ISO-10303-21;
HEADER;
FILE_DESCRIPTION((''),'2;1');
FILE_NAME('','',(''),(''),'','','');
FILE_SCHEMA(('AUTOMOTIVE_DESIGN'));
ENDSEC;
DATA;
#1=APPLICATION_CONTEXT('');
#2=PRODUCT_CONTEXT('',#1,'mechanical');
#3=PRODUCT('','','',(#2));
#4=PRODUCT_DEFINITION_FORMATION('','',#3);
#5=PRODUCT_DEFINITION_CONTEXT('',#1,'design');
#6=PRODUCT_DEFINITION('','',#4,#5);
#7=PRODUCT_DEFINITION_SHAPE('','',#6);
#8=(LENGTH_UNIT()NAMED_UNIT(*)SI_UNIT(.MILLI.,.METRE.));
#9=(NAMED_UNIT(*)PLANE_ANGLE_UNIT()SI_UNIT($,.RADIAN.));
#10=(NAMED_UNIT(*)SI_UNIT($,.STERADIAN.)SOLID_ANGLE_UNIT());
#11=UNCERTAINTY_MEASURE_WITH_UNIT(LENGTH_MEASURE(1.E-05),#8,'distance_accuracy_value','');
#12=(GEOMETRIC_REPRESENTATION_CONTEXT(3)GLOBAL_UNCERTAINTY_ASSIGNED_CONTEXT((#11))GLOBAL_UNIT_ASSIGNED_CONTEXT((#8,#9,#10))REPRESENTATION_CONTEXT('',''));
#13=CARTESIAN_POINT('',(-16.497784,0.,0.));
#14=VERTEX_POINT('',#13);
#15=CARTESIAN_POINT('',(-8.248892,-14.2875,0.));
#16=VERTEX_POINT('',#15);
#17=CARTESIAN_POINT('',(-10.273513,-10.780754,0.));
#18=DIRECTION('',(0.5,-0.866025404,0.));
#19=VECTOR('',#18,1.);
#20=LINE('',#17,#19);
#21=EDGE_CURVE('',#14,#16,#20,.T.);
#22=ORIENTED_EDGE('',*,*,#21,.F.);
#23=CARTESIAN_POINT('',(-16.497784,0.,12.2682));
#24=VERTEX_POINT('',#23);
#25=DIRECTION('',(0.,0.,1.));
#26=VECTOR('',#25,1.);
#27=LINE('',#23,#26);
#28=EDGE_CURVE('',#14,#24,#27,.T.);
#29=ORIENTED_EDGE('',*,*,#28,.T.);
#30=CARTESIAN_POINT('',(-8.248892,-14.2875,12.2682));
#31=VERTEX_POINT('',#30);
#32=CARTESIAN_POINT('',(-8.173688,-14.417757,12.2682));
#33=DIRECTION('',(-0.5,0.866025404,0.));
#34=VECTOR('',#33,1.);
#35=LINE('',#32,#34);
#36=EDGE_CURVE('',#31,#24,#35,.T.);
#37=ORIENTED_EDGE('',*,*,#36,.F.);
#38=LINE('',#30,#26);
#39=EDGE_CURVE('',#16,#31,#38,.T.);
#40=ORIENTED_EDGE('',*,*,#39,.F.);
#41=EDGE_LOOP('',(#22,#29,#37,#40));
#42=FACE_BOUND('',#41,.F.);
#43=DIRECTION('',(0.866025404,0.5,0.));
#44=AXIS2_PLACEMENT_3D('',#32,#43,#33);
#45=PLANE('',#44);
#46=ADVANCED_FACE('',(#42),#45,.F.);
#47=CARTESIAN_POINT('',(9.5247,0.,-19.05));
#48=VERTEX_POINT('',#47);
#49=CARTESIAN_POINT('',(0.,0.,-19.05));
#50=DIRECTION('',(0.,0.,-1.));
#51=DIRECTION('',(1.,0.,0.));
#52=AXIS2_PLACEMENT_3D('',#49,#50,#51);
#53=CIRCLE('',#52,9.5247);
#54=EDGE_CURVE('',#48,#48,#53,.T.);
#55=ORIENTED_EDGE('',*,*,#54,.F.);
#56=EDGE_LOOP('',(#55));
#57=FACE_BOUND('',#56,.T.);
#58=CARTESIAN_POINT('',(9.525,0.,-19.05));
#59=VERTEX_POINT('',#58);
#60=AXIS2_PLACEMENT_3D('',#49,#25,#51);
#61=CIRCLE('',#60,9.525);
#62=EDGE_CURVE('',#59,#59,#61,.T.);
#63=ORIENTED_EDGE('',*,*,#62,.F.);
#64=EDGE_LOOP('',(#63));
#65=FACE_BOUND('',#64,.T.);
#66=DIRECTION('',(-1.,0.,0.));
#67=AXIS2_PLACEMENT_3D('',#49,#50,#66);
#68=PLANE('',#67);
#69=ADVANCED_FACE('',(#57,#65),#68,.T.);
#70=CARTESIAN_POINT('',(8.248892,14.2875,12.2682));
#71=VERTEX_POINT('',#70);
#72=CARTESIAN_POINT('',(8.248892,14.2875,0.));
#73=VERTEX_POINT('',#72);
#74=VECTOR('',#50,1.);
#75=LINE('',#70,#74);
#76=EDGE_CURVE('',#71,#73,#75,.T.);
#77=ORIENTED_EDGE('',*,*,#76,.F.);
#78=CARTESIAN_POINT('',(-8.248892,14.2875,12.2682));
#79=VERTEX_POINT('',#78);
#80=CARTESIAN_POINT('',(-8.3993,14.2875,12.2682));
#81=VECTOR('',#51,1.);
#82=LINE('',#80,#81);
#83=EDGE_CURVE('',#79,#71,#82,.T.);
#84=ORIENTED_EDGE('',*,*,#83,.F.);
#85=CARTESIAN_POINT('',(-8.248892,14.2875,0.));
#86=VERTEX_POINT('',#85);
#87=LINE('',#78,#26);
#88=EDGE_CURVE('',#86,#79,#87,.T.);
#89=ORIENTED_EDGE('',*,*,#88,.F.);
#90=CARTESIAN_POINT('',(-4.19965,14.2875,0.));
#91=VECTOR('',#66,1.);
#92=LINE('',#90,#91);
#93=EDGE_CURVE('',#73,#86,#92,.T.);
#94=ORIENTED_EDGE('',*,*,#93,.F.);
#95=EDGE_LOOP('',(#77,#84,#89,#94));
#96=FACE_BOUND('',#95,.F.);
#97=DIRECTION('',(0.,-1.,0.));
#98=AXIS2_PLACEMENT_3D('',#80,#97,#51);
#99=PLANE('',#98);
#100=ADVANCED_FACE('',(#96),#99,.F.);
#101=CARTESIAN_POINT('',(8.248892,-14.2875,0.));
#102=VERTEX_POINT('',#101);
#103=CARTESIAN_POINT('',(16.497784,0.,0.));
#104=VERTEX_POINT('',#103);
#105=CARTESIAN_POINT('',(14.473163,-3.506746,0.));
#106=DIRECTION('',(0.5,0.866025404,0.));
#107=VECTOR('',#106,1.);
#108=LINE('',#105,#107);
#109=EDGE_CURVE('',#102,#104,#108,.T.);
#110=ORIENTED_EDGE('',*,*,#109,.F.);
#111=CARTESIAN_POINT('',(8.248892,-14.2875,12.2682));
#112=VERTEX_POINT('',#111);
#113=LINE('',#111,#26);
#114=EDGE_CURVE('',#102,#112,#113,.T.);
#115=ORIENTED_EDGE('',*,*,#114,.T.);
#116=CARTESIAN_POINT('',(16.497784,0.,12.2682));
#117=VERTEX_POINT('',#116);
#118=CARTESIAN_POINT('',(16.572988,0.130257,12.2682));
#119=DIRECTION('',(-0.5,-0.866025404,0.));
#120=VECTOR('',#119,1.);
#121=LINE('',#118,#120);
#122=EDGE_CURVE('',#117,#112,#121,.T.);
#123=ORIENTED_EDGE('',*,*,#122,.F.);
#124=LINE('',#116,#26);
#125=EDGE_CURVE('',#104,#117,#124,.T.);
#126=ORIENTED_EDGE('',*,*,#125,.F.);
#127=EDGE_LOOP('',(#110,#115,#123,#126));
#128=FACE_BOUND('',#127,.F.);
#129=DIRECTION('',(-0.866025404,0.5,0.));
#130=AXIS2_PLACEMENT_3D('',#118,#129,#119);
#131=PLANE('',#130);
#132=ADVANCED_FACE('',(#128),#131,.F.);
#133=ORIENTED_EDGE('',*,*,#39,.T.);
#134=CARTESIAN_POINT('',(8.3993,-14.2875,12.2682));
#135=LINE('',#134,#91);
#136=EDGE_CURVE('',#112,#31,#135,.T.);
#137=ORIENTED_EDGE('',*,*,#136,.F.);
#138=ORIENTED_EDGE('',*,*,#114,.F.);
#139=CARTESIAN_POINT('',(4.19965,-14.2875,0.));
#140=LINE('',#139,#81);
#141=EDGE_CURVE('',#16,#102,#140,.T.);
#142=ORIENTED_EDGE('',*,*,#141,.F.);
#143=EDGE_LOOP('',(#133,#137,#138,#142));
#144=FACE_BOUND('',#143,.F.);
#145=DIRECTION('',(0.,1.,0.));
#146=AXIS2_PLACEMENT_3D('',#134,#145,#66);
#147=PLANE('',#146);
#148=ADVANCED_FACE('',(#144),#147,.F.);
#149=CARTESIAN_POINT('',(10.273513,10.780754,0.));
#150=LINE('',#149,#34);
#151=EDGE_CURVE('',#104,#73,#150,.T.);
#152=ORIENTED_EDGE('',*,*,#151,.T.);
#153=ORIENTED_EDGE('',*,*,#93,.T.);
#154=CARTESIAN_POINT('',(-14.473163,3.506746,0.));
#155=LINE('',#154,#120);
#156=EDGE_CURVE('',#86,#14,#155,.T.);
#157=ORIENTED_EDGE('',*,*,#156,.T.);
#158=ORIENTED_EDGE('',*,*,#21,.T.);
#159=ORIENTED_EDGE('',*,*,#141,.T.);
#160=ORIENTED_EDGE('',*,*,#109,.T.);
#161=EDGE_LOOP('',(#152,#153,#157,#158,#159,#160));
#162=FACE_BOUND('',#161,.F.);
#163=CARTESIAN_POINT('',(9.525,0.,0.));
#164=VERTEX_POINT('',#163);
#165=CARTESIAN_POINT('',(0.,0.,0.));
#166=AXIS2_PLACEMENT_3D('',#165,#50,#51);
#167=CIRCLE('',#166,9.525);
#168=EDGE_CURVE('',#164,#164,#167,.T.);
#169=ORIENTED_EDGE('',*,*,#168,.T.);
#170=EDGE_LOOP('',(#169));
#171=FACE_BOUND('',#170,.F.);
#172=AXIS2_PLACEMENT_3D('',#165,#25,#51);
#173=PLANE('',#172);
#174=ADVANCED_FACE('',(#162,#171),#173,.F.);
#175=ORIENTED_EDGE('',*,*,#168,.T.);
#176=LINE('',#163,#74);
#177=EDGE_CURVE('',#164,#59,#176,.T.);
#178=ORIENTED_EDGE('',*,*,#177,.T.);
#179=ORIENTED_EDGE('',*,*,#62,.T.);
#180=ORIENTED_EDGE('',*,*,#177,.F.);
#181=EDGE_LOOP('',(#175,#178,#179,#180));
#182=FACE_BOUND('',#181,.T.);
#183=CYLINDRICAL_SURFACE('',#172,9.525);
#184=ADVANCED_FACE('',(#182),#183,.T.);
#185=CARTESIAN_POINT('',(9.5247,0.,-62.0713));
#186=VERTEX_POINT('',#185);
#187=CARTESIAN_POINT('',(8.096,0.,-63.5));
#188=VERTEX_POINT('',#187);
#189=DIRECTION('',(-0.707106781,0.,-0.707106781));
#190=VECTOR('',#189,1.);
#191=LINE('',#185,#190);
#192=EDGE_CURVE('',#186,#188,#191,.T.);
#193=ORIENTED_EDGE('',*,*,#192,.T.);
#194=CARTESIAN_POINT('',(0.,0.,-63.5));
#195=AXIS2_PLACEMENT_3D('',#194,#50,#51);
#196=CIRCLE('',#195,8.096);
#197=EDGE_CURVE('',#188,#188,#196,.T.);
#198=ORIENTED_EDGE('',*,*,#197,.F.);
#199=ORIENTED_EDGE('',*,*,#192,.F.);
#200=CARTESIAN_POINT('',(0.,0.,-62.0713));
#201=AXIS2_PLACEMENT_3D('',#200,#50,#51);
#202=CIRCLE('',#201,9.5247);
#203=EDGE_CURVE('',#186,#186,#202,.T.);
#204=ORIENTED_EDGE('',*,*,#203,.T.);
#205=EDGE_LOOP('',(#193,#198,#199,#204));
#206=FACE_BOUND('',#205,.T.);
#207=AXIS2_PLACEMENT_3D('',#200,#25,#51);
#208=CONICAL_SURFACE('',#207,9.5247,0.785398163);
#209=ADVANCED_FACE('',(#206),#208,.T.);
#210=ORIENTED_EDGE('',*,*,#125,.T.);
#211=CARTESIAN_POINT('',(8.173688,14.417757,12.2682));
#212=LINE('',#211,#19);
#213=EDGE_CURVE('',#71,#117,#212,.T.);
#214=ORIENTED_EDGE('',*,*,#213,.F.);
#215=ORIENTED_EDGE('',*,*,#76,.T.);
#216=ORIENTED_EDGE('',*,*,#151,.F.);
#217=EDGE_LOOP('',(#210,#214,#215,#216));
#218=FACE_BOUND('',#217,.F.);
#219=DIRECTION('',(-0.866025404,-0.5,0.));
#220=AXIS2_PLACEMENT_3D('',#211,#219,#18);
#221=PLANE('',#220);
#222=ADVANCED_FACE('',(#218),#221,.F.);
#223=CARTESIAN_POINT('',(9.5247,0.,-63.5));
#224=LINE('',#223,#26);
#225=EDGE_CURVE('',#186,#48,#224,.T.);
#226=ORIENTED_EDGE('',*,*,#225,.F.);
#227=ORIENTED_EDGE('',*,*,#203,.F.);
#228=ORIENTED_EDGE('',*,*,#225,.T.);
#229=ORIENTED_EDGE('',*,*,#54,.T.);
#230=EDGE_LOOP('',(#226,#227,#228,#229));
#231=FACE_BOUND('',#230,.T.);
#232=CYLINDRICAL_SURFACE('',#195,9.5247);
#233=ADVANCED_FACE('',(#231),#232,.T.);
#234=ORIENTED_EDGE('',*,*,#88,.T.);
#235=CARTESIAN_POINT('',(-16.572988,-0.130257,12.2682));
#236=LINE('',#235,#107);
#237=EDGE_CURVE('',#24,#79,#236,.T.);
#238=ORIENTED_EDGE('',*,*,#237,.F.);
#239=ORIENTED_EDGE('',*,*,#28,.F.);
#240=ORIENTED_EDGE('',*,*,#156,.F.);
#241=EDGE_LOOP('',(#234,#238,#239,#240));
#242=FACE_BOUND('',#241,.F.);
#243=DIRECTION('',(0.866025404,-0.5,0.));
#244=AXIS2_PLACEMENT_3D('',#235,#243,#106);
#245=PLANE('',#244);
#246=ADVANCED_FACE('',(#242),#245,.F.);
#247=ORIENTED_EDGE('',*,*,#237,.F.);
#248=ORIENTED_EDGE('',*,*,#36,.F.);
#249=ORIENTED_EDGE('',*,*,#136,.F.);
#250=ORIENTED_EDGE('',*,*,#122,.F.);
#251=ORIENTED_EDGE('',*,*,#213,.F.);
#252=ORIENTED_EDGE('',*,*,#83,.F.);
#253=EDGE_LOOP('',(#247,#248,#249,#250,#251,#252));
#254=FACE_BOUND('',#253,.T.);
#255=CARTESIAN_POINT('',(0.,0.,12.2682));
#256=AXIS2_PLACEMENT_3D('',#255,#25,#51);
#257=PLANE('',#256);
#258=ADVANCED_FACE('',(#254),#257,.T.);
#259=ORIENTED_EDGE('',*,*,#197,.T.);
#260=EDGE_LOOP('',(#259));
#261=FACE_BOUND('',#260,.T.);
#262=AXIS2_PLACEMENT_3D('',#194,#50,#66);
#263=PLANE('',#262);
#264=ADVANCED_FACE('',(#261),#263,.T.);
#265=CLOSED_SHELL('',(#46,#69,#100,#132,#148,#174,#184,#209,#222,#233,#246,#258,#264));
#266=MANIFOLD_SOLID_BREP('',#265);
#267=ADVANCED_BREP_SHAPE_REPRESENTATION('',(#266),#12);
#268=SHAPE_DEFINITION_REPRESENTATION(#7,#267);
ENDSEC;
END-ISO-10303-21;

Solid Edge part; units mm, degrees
sketch "Sketch1" plane through (0, 0, 0) normal (0, 0, 1) x (1, 0, 0)
  circle A0 centre (0, 0) radius 16.5735
  dimension "D1" = 33.147
extrude "Protrusion1" add sketch "Sketch1" along normal blind 12.2682
sketch "Sketch2" plane through (0, 0, 0) normal (0, 0, -1) x (1, 0, 0)
  circle A0 centre (0, 0) radius 9.525
extrude "Protrusion2" add sketch "Sketch2" along normal blind 63.5
sketch "Sketch3" plane through (0, 0, -63.5) normal (0, 0, -1) x (1, 0, 0)
  circle A0 centre (0, 0) radius 9.5247
extrude "Cutout1" cut sketch "Sketch3" against normal blind 44.45 flip side to cut
chamfer "Chamfer_1" distance 1.4287 angle 45 1 edges at (-9.5247, 0, -63.5)
sketch "Sketch4" plane through (0, 0, 12.2682) normal (0, 0, 1) x (1, 0, 0)
  line L0 (-8.3993, 14.2875) -> (8.3993, 14.2875)
  dimension "D1" = 28.575
extrude "Cutout2" cut sketch "Sketch4" against normal up to next material side at (0, 14.3375, 12.2682)
pattern_circular "Pattern1" count 6 over 360 about axis through (0, 0, 12.2682) along (0, 0, 1) of "Cutout2"
properties part number "24102991"
